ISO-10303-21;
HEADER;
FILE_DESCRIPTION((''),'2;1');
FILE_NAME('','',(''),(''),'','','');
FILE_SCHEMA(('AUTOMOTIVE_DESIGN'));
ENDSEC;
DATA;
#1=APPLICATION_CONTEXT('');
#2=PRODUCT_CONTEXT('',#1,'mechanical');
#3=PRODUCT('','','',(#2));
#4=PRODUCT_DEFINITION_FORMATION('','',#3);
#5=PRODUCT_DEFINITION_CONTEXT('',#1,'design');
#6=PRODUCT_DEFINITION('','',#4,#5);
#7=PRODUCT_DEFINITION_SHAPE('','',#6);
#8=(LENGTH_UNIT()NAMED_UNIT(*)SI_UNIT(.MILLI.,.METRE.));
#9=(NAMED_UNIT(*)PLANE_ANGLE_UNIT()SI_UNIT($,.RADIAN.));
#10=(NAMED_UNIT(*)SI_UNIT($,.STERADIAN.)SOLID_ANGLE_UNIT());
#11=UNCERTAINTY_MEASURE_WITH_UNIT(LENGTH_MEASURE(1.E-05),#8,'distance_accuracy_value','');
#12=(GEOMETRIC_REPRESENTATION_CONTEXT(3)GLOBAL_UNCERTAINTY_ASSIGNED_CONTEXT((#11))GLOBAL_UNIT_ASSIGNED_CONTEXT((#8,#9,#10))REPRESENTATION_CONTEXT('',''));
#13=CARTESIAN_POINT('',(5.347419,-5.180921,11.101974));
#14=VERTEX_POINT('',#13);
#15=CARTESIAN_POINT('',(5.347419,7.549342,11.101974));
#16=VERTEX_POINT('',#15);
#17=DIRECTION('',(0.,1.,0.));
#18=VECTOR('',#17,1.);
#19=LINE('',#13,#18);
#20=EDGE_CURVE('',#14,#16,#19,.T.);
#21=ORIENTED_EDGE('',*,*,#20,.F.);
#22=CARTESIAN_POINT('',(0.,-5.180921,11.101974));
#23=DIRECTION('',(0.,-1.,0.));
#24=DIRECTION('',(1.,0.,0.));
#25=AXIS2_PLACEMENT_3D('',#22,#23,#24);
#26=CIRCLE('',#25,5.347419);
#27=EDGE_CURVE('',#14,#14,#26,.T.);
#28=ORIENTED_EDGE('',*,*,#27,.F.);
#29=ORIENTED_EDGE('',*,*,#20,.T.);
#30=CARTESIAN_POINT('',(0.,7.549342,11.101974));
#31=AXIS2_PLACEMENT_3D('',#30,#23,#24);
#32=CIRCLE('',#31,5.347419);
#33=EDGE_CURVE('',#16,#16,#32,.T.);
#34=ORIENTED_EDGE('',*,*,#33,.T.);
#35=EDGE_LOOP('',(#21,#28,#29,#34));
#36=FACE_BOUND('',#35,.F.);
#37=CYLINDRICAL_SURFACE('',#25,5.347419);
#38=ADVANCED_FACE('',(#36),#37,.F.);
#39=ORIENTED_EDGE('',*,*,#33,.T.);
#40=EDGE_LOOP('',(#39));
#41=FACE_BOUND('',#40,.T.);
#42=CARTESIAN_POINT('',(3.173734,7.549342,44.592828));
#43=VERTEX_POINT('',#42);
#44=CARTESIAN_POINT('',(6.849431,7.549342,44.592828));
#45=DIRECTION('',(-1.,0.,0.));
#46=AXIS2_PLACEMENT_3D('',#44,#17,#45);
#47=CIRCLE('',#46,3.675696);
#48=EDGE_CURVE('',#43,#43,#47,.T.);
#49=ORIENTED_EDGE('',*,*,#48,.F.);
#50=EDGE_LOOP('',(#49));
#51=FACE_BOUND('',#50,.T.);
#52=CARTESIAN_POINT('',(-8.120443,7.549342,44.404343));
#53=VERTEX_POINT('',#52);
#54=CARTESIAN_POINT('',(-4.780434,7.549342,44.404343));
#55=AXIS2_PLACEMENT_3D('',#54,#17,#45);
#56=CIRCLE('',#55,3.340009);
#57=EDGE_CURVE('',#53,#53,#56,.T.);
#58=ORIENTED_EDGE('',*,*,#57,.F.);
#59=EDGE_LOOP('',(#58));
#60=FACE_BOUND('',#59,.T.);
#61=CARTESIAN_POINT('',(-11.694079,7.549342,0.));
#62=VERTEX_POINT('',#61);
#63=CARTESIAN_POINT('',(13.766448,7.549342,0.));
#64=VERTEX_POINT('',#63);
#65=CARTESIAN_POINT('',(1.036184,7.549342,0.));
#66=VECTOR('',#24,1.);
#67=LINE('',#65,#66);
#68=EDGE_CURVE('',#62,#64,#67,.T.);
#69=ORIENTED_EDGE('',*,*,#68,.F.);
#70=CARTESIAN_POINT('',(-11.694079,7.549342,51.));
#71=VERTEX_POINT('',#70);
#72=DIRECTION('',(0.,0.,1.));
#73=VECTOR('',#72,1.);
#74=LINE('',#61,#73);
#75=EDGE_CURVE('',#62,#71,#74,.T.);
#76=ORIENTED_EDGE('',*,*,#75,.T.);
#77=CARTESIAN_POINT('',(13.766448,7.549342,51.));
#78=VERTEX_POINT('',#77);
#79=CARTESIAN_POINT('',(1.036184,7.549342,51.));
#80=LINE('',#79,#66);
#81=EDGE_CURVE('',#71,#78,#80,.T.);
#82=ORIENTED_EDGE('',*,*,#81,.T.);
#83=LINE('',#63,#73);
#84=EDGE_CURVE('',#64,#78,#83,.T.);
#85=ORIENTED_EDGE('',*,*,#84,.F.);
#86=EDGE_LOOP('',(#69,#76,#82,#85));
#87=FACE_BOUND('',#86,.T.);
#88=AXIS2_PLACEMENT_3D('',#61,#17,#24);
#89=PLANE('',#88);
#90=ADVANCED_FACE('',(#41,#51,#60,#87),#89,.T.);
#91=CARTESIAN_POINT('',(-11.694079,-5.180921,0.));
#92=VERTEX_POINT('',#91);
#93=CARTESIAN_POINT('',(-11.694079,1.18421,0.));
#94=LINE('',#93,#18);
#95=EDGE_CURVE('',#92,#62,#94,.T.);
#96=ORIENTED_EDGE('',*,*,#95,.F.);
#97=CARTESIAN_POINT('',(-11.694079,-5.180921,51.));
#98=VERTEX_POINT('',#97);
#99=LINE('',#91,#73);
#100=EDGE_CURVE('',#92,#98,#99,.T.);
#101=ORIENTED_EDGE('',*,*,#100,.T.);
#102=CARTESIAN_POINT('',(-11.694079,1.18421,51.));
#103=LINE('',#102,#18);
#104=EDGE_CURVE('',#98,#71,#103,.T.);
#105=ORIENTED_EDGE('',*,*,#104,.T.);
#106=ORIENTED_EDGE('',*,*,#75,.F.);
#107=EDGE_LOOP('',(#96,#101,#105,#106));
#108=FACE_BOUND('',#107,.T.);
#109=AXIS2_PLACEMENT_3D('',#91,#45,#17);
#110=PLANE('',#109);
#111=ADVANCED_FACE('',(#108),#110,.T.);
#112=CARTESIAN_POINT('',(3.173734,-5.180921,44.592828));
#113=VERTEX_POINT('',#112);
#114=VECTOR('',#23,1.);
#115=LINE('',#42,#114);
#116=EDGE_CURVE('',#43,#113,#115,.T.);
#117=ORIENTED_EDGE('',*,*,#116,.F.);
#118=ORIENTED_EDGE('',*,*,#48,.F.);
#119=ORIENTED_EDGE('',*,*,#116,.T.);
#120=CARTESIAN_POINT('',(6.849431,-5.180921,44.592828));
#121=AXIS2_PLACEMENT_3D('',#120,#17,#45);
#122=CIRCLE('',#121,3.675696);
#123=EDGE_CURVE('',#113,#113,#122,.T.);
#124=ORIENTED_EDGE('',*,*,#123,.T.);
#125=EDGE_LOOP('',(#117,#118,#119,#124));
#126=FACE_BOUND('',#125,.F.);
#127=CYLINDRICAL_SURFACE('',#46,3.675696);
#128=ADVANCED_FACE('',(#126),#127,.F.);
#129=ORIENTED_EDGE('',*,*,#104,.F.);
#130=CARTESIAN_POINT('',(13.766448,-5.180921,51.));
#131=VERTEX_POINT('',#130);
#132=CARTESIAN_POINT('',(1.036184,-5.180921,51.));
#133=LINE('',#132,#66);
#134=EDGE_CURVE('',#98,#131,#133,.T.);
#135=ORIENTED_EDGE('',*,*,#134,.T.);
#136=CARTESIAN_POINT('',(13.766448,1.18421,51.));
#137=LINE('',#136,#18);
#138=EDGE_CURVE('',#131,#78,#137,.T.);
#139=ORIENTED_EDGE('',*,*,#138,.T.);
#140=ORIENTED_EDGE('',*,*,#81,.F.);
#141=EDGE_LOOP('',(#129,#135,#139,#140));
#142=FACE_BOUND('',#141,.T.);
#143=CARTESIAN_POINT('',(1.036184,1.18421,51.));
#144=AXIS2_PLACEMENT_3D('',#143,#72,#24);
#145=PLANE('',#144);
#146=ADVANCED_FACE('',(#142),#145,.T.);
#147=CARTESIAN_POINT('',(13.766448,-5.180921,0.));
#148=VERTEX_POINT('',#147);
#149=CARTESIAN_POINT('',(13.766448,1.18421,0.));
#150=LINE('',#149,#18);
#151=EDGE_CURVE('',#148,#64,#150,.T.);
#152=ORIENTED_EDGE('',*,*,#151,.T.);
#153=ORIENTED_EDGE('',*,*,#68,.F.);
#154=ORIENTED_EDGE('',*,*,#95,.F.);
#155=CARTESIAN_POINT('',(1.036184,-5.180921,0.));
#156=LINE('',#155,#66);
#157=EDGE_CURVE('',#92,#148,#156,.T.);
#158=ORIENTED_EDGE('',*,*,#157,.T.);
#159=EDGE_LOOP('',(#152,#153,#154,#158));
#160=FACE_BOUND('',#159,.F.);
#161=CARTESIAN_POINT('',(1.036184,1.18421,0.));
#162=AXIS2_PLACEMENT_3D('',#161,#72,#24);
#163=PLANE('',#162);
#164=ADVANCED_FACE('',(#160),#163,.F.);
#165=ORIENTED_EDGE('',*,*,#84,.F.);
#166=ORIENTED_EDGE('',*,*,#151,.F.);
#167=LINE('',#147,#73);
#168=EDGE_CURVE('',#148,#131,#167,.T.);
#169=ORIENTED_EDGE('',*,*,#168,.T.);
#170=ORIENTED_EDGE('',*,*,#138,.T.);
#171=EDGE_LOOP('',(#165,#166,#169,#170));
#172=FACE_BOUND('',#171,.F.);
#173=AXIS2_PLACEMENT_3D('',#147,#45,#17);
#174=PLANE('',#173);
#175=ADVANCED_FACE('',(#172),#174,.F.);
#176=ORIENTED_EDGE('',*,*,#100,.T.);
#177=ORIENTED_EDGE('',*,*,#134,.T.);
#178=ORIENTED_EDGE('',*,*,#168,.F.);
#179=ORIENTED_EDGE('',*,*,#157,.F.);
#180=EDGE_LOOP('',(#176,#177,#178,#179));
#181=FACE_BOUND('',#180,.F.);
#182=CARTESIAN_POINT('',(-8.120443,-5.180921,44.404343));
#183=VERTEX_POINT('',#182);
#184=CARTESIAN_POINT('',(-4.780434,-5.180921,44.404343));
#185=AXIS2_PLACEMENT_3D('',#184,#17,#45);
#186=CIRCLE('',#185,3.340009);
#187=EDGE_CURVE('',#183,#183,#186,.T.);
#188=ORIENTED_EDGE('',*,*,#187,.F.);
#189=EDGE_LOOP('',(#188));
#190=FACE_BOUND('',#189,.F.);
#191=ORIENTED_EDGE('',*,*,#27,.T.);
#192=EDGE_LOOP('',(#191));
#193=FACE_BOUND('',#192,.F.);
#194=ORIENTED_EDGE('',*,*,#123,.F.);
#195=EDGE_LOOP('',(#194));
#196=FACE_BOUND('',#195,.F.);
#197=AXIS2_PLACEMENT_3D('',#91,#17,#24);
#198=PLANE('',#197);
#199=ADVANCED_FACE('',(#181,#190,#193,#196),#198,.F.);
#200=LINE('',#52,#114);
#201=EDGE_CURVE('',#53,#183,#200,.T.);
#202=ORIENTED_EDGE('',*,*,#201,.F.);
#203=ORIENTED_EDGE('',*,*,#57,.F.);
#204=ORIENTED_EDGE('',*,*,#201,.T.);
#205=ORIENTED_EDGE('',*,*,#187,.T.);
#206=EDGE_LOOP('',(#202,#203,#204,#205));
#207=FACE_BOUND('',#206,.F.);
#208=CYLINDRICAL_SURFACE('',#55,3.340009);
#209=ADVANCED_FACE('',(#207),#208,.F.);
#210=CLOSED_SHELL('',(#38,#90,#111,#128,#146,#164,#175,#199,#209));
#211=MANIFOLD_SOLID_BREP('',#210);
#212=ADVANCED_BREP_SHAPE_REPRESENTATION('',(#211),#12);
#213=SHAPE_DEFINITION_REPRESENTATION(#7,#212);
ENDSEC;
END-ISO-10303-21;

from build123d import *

# Parameters (mm, degrees)
F0_W     = 25.4605272785
F0_H     = 12.7302636392
F1_DEPTH = 51
F2_R     = 3.6756964622
F3_DEPTH = 25
F4_R     = 3.3400093655
F5_DEPTH = 25
F6_R     = 5.3474190326
F7_DEPTH = 25


# Not quite as in the source:
# - a feature names something its author has since deleted; it is built from what else it names


with BuildPart() as f1:
    # F0 (on Top) → F1 (new body)
    with BuildSketch(Plane.XY):
        with Locations((1.0361843742, 1.1842104141)):
            Rectangle(F0_W, F0_H)
    extrude(amount=F1_DEPTH)

    # F2 (on face) → F3 (cut)
    with BuildSketch(Plane(origin=(0, 7.5493422337, 0), x_dir=(-1, 0, 0), z_dir=(0, 1, 0))):
        with Locations((-6.8494305015, 44.5928275585)):
            Circle(F2_R)
    extrude(amount=-F3_DEPTH, mode=Mode.SUBTRACT)

    # F4 (on face) → F5 (cut)
    with BuildSketch(Plane(origin=(0, 7.5493422337, 0), x_dir=(-1, 0, 0), z_dir=(0, 1, 0))):
        with Locations((4.7804336064, 44.4043427706)):
            Circle(F4_R)
    extrude(amount=-F5_DEPTH, mode=Mode.SUBTRACT)

    # F6 (on face) → F7 (cut)
    with BuildSketch(Plane.XZ.offset(5.1809214056)):
        with Locations((0, 11.1019741744)):
            Circle(F6_R)
    extrude(amount=-F7_DEPTH, mode=Mode.SUBTRACT)


solid = f1.part
